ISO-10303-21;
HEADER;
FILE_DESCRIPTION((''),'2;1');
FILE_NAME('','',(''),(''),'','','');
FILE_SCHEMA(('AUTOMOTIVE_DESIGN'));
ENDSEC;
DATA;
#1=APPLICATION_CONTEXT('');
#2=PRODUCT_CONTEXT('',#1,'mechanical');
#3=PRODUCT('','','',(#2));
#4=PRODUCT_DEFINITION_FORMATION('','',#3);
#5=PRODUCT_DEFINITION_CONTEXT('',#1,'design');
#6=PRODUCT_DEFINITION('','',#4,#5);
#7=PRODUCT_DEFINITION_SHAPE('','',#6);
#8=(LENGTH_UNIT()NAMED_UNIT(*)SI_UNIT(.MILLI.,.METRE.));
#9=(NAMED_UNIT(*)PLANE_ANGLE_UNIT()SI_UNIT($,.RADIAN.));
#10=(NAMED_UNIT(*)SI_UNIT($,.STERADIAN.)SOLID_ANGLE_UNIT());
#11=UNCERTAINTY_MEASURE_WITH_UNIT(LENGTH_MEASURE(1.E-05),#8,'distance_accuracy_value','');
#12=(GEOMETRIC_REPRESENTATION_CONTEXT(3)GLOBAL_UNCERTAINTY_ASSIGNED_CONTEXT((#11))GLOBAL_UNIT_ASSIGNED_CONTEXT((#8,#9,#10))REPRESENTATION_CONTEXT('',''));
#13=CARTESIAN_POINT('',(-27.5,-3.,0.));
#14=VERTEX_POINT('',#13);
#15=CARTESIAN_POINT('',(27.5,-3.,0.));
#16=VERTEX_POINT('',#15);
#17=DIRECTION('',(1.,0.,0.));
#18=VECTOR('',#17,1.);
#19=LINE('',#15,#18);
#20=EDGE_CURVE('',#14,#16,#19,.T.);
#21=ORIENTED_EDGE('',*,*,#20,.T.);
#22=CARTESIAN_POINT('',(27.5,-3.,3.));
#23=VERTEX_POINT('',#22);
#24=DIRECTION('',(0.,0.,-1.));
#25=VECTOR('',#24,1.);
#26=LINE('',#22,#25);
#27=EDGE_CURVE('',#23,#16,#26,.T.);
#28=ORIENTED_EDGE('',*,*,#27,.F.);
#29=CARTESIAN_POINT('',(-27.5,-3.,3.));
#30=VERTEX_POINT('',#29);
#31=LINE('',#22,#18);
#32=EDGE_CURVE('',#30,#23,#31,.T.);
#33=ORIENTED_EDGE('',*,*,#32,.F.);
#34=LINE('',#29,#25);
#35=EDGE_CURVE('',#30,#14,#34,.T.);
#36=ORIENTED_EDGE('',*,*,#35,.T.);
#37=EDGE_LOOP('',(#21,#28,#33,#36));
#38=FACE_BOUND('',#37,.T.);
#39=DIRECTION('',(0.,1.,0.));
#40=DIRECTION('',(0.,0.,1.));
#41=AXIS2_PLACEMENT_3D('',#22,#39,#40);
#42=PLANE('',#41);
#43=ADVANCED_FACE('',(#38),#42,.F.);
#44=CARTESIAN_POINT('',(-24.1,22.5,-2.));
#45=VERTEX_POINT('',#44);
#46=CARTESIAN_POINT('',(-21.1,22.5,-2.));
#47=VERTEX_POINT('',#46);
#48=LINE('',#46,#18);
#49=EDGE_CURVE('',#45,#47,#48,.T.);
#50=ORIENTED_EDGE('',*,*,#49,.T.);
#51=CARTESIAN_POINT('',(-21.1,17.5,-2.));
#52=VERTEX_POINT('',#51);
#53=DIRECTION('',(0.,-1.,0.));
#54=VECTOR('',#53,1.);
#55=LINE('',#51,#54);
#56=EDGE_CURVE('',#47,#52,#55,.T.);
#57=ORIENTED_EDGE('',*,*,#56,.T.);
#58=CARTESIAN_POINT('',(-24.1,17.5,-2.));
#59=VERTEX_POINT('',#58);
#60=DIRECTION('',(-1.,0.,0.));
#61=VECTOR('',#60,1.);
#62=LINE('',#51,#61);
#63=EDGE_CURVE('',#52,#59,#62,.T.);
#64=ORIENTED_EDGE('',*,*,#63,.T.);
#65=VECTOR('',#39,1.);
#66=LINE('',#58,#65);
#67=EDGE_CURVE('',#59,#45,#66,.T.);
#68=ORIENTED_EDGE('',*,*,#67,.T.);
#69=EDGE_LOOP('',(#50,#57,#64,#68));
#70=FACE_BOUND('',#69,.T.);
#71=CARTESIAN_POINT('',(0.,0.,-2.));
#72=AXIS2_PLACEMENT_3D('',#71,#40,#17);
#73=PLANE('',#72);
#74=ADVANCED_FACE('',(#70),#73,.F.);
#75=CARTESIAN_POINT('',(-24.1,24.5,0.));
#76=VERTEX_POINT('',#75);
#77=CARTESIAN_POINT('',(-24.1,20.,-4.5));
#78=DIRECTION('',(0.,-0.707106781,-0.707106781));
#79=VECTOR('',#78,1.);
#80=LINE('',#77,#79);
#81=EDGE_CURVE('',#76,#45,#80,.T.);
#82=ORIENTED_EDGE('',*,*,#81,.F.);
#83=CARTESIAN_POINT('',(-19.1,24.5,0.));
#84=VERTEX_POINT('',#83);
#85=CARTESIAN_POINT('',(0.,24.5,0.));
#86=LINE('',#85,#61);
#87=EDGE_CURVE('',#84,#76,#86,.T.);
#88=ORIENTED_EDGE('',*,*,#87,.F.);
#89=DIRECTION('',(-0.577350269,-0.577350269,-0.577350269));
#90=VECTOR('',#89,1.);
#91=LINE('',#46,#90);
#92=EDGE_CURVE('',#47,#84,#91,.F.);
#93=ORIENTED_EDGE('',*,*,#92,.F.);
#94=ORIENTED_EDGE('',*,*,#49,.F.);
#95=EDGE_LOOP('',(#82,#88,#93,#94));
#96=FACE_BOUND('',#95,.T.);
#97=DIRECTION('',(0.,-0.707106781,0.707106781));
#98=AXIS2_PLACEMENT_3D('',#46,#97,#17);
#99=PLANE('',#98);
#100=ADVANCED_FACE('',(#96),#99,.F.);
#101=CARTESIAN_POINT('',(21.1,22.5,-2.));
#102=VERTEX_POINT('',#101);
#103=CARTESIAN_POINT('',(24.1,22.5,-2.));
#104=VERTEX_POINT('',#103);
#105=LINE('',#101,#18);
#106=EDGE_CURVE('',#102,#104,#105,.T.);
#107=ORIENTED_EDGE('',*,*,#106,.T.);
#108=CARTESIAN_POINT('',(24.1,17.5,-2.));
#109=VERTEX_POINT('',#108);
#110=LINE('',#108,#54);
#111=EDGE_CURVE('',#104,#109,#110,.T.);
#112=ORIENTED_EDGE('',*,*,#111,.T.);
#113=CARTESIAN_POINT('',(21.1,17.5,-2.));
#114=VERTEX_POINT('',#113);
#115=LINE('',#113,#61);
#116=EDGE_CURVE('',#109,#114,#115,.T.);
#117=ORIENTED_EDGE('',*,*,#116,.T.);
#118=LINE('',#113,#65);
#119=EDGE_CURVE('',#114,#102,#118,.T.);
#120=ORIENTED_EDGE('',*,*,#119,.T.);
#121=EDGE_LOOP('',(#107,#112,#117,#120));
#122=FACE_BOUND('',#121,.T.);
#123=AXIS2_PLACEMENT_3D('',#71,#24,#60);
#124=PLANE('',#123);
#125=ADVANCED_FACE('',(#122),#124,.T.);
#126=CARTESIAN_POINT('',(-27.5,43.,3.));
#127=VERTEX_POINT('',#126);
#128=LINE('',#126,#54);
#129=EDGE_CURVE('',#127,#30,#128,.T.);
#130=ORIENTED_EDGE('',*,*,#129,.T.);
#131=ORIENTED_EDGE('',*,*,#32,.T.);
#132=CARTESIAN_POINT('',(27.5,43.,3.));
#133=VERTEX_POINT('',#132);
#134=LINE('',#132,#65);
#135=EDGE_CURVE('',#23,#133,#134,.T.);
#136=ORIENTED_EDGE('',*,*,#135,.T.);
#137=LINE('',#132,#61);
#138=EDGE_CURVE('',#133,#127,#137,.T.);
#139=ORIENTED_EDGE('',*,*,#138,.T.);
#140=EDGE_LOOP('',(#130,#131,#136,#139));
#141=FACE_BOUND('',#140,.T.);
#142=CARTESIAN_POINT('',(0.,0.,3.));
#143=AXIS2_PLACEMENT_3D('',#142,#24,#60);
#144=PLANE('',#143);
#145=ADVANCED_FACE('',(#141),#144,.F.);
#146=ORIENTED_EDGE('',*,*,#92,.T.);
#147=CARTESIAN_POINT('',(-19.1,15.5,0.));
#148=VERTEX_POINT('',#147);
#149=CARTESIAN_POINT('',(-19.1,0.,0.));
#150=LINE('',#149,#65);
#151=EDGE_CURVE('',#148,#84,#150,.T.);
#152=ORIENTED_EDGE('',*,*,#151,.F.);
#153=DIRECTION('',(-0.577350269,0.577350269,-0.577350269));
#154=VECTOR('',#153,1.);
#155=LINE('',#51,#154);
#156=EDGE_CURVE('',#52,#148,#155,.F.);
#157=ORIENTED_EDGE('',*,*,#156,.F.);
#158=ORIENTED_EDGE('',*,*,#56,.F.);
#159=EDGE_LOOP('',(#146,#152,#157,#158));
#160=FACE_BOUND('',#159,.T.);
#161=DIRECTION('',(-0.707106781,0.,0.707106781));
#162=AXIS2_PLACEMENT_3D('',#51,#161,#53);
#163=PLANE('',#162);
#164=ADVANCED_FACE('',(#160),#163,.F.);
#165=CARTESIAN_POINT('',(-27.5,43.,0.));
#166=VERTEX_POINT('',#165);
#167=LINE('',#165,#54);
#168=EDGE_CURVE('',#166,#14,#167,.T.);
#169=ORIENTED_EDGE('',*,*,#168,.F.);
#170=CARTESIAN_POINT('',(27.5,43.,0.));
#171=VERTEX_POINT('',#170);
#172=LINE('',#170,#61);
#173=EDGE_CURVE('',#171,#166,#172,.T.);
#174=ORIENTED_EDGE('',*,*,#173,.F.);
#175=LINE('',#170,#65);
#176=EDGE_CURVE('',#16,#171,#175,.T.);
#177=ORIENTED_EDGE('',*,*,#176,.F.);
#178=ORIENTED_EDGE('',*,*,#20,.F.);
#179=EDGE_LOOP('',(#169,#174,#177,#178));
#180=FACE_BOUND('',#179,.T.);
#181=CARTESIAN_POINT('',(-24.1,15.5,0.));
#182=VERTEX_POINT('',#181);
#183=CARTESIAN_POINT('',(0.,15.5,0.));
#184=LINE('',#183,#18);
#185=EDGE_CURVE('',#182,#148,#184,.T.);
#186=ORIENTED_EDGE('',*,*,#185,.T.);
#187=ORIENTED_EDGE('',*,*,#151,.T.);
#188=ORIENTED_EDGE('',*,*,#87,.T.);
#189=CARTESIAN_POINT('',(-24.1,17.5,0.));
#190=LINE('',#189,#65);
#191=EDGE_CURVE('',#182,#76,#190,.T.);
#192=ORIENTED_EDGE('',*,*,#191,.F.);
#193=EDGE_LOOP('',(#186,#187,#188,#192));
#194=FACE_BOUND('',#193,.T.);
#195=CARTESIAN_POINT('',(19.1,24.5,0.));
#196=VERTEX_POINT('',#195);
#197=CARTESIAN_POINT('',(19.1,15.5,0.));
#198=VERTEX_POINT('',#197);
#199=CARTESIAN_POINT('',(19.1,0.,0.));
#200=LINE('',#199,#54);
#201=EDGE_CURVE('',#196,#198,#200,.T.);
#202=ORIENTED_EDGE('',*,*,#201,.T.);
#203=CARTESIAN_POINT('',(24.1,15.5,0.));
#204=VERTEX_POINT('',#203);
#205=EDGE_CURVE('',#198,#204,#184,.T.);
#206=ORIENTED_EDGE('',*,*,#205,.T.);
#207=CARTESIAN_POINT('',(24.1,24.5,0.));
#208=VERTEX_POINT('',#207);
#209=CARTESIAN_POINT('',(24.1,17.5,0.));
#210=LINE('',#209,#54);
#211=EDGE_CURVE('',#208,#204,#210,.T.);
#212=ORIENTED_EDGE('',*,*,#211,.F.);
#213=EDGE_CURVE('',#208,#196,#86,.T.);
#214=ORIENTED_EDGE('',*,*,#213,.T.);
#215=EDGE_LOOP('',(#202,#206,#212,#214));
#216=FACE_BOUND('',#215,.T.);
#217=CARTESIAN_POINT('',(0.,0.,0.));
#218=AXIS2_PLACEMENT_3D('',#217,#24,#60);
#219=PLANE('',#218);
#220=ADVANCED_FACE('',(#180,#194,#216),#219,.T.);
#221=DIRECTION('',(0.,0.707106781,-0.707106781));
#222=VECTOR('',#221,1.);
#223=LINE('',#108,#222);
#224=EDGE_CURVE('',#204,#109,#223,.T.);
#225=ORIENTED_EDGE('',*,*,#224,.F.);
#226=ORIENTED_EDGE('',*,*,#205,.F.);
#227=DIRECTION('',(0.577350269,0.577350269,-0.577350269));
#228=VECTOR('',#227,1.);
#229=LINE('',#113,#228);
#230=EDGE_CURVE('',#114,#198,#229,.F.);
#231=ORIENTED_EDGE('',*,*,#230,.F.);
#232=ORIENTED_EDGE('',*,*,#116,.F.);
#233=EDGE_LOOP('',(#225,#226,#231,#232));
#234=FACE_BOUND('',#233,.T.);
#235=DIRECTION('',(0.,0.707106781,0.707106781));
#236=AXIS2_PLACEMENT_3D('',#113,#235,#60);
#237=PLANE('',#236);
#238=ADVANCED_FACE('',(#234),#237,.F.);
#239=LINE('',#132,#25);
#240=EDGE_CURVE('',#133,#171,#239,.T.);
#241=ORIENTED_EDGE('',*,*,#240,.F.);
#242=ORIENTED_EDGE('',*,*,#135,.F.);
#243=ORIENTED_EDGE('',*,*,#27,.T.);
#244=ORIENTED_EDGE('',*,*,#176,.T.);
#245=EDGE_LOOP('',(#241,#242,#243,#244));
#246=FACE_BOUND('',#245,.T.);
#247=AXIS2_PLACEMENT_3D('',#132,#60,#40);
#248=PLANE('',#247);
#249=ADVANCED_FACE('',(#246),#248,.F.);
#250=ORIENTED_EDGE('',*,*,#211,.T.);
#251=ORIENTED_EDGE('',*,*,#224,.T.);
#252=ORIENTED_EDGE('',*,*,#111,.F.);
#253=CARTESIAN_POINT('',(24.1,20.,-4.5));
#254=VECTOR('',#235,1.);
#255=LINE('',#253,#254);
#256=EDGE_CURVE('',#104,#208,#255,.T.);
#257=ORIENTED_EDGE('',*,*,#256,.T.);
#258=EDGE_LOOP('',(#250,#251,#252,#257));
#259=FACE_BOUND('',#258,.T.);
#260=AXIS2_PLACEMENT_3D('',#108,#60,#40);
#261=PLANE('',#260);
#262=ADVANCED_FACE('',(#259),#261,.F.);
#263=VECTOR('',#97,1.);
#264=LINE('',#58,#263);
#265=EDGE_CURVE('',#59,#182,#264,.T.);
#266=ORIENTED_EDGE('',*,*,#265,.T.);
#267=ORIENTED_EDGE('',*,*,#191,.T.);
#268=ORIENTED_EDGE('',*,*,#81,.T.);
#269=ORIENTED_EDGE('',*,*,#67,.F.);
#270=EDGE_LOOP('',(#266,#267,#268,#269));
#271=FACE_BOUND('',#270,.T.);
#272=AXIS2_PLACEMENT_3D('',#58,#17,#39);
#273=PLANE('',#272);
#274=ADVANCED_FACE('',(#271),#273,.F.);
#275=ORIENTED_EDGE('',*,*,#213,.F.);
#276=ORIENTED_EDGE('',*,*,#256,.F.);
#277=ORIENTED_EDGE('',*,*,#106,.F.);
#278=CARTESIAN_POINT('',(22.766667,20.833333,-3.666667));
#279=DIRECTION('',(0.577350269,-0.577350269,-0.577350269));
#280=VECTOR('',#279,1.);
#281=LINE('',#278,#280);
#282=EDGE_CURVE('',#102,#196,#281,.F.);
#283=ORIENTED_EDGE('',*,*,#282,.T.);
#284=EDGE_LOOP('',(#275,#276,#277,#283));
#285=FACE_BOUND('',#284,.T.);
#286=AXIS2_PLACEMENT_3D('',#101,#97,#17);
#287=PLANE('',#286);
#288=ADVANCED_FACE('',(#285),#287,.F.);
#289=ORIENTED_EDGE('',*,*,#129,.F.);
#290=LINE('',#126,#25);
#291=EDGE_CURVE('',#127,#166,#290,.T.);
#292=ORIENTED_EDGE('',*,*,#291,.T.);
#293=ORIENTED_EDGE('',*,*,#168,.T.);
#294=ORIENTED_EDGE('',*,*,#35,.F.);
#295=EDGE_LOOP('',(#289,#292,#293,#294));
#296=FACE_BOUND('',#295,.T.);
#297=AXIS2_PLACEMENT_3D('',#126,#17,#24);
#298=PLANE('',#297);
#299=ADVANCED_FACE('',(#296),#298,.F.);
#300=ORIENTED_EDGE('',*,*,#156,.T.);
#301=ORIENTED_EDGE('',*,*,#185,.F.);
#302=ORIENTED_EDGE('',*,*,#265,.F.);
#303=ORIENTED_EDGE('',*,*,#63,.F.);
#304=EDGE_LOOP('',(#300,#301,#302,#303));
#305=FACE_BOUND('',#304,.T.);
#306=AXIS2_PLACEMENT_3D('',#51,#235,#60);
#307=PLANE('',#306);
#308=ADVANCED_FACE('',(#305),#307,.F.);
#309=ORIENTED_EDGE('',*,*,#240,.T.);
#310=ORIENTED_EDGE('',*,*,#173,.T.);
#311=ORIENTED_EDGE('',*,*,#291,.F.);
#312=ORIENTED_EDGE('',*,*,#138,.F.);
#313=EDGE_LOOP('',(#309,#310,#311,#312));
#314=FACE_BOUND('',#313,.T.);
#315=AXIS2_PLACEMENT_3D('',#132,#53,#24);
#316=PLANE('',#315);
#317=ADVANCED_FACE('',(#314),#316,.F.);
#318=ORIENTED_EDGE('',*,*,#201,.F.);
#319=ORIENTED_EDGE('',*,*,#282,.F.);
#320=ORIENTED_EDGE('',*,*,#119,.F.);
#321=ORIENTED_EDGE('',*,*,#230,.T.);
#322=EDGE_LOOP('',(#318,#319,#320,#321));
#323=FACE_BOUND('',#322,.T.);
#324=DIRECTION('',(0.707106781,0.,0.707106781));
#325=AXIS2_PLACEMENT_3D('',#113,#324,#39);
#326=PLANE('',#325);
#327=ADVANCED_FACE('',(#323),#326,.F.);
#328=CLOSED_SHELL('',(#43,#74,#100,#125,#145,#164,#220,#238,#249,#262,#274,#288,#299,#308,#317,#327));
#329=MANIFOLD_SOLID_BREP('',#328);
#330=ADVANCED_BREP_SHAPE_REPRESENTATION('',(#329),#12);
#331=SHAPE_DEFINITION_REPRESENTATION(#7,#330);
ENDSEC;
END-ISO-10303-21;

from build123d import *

# Parameters (mm, degrees)
SKETCH_1_W      = 55
SKETCH_1_H      = 46
EXTRUDE_1_DEPTH = 3
SKETCH_2_W      = 3
SKETCH_2_H      = 5
EXTRUDE_2_DEPTH = 2
CHAMFER_1_SIZE  = 2


with BuildPart() as part:
    # Эскиз1 → Бобышка-Вытянуть1 (new body)
    with BuildSketch(Plane.XY):
        with Locations((0, 20)):
            Rectangle(SKETCH_1_W, SKETCH_1_H)
    extrude(amount=EXTRUDE_1_DEPTH)

    # Эскиз2 → Бобышка-Вытянуть2 (add)
    with BuildSketch(Plane(origin=(0, 0, 0), x_dir=(-1, 0, 0), z_dir=(0, 0, -1))):
        with Locations((-22.6, 20)):
            Rectangle(SKETCH_2_W, SKETCH_2_H)
        with Locations((22.6, 20)):
            Rectangle(SKETCH_2_W, SKETCH_2_H)
    extrude(amount=EXTRUDE_2_DEPTH)

    # Фаска1
    chamfer_1_edges = [part.edges().sort_by_distance(p)[0] for p in [
        (-22.6, 17.5, 0),
        (-21.1, 20, 0),
        (-22.6, 22.5, 0),
        (22.6, 22.5, 0),
        (21.1, 20, 0),
        (22.6, 17.5, 0),
    ]]
    chamfer(chamfer_1_edges, length=CHAMFER_1_SIZE - 0.0001)  # a hair under: the kernel refuses the full size


solid = part.part
